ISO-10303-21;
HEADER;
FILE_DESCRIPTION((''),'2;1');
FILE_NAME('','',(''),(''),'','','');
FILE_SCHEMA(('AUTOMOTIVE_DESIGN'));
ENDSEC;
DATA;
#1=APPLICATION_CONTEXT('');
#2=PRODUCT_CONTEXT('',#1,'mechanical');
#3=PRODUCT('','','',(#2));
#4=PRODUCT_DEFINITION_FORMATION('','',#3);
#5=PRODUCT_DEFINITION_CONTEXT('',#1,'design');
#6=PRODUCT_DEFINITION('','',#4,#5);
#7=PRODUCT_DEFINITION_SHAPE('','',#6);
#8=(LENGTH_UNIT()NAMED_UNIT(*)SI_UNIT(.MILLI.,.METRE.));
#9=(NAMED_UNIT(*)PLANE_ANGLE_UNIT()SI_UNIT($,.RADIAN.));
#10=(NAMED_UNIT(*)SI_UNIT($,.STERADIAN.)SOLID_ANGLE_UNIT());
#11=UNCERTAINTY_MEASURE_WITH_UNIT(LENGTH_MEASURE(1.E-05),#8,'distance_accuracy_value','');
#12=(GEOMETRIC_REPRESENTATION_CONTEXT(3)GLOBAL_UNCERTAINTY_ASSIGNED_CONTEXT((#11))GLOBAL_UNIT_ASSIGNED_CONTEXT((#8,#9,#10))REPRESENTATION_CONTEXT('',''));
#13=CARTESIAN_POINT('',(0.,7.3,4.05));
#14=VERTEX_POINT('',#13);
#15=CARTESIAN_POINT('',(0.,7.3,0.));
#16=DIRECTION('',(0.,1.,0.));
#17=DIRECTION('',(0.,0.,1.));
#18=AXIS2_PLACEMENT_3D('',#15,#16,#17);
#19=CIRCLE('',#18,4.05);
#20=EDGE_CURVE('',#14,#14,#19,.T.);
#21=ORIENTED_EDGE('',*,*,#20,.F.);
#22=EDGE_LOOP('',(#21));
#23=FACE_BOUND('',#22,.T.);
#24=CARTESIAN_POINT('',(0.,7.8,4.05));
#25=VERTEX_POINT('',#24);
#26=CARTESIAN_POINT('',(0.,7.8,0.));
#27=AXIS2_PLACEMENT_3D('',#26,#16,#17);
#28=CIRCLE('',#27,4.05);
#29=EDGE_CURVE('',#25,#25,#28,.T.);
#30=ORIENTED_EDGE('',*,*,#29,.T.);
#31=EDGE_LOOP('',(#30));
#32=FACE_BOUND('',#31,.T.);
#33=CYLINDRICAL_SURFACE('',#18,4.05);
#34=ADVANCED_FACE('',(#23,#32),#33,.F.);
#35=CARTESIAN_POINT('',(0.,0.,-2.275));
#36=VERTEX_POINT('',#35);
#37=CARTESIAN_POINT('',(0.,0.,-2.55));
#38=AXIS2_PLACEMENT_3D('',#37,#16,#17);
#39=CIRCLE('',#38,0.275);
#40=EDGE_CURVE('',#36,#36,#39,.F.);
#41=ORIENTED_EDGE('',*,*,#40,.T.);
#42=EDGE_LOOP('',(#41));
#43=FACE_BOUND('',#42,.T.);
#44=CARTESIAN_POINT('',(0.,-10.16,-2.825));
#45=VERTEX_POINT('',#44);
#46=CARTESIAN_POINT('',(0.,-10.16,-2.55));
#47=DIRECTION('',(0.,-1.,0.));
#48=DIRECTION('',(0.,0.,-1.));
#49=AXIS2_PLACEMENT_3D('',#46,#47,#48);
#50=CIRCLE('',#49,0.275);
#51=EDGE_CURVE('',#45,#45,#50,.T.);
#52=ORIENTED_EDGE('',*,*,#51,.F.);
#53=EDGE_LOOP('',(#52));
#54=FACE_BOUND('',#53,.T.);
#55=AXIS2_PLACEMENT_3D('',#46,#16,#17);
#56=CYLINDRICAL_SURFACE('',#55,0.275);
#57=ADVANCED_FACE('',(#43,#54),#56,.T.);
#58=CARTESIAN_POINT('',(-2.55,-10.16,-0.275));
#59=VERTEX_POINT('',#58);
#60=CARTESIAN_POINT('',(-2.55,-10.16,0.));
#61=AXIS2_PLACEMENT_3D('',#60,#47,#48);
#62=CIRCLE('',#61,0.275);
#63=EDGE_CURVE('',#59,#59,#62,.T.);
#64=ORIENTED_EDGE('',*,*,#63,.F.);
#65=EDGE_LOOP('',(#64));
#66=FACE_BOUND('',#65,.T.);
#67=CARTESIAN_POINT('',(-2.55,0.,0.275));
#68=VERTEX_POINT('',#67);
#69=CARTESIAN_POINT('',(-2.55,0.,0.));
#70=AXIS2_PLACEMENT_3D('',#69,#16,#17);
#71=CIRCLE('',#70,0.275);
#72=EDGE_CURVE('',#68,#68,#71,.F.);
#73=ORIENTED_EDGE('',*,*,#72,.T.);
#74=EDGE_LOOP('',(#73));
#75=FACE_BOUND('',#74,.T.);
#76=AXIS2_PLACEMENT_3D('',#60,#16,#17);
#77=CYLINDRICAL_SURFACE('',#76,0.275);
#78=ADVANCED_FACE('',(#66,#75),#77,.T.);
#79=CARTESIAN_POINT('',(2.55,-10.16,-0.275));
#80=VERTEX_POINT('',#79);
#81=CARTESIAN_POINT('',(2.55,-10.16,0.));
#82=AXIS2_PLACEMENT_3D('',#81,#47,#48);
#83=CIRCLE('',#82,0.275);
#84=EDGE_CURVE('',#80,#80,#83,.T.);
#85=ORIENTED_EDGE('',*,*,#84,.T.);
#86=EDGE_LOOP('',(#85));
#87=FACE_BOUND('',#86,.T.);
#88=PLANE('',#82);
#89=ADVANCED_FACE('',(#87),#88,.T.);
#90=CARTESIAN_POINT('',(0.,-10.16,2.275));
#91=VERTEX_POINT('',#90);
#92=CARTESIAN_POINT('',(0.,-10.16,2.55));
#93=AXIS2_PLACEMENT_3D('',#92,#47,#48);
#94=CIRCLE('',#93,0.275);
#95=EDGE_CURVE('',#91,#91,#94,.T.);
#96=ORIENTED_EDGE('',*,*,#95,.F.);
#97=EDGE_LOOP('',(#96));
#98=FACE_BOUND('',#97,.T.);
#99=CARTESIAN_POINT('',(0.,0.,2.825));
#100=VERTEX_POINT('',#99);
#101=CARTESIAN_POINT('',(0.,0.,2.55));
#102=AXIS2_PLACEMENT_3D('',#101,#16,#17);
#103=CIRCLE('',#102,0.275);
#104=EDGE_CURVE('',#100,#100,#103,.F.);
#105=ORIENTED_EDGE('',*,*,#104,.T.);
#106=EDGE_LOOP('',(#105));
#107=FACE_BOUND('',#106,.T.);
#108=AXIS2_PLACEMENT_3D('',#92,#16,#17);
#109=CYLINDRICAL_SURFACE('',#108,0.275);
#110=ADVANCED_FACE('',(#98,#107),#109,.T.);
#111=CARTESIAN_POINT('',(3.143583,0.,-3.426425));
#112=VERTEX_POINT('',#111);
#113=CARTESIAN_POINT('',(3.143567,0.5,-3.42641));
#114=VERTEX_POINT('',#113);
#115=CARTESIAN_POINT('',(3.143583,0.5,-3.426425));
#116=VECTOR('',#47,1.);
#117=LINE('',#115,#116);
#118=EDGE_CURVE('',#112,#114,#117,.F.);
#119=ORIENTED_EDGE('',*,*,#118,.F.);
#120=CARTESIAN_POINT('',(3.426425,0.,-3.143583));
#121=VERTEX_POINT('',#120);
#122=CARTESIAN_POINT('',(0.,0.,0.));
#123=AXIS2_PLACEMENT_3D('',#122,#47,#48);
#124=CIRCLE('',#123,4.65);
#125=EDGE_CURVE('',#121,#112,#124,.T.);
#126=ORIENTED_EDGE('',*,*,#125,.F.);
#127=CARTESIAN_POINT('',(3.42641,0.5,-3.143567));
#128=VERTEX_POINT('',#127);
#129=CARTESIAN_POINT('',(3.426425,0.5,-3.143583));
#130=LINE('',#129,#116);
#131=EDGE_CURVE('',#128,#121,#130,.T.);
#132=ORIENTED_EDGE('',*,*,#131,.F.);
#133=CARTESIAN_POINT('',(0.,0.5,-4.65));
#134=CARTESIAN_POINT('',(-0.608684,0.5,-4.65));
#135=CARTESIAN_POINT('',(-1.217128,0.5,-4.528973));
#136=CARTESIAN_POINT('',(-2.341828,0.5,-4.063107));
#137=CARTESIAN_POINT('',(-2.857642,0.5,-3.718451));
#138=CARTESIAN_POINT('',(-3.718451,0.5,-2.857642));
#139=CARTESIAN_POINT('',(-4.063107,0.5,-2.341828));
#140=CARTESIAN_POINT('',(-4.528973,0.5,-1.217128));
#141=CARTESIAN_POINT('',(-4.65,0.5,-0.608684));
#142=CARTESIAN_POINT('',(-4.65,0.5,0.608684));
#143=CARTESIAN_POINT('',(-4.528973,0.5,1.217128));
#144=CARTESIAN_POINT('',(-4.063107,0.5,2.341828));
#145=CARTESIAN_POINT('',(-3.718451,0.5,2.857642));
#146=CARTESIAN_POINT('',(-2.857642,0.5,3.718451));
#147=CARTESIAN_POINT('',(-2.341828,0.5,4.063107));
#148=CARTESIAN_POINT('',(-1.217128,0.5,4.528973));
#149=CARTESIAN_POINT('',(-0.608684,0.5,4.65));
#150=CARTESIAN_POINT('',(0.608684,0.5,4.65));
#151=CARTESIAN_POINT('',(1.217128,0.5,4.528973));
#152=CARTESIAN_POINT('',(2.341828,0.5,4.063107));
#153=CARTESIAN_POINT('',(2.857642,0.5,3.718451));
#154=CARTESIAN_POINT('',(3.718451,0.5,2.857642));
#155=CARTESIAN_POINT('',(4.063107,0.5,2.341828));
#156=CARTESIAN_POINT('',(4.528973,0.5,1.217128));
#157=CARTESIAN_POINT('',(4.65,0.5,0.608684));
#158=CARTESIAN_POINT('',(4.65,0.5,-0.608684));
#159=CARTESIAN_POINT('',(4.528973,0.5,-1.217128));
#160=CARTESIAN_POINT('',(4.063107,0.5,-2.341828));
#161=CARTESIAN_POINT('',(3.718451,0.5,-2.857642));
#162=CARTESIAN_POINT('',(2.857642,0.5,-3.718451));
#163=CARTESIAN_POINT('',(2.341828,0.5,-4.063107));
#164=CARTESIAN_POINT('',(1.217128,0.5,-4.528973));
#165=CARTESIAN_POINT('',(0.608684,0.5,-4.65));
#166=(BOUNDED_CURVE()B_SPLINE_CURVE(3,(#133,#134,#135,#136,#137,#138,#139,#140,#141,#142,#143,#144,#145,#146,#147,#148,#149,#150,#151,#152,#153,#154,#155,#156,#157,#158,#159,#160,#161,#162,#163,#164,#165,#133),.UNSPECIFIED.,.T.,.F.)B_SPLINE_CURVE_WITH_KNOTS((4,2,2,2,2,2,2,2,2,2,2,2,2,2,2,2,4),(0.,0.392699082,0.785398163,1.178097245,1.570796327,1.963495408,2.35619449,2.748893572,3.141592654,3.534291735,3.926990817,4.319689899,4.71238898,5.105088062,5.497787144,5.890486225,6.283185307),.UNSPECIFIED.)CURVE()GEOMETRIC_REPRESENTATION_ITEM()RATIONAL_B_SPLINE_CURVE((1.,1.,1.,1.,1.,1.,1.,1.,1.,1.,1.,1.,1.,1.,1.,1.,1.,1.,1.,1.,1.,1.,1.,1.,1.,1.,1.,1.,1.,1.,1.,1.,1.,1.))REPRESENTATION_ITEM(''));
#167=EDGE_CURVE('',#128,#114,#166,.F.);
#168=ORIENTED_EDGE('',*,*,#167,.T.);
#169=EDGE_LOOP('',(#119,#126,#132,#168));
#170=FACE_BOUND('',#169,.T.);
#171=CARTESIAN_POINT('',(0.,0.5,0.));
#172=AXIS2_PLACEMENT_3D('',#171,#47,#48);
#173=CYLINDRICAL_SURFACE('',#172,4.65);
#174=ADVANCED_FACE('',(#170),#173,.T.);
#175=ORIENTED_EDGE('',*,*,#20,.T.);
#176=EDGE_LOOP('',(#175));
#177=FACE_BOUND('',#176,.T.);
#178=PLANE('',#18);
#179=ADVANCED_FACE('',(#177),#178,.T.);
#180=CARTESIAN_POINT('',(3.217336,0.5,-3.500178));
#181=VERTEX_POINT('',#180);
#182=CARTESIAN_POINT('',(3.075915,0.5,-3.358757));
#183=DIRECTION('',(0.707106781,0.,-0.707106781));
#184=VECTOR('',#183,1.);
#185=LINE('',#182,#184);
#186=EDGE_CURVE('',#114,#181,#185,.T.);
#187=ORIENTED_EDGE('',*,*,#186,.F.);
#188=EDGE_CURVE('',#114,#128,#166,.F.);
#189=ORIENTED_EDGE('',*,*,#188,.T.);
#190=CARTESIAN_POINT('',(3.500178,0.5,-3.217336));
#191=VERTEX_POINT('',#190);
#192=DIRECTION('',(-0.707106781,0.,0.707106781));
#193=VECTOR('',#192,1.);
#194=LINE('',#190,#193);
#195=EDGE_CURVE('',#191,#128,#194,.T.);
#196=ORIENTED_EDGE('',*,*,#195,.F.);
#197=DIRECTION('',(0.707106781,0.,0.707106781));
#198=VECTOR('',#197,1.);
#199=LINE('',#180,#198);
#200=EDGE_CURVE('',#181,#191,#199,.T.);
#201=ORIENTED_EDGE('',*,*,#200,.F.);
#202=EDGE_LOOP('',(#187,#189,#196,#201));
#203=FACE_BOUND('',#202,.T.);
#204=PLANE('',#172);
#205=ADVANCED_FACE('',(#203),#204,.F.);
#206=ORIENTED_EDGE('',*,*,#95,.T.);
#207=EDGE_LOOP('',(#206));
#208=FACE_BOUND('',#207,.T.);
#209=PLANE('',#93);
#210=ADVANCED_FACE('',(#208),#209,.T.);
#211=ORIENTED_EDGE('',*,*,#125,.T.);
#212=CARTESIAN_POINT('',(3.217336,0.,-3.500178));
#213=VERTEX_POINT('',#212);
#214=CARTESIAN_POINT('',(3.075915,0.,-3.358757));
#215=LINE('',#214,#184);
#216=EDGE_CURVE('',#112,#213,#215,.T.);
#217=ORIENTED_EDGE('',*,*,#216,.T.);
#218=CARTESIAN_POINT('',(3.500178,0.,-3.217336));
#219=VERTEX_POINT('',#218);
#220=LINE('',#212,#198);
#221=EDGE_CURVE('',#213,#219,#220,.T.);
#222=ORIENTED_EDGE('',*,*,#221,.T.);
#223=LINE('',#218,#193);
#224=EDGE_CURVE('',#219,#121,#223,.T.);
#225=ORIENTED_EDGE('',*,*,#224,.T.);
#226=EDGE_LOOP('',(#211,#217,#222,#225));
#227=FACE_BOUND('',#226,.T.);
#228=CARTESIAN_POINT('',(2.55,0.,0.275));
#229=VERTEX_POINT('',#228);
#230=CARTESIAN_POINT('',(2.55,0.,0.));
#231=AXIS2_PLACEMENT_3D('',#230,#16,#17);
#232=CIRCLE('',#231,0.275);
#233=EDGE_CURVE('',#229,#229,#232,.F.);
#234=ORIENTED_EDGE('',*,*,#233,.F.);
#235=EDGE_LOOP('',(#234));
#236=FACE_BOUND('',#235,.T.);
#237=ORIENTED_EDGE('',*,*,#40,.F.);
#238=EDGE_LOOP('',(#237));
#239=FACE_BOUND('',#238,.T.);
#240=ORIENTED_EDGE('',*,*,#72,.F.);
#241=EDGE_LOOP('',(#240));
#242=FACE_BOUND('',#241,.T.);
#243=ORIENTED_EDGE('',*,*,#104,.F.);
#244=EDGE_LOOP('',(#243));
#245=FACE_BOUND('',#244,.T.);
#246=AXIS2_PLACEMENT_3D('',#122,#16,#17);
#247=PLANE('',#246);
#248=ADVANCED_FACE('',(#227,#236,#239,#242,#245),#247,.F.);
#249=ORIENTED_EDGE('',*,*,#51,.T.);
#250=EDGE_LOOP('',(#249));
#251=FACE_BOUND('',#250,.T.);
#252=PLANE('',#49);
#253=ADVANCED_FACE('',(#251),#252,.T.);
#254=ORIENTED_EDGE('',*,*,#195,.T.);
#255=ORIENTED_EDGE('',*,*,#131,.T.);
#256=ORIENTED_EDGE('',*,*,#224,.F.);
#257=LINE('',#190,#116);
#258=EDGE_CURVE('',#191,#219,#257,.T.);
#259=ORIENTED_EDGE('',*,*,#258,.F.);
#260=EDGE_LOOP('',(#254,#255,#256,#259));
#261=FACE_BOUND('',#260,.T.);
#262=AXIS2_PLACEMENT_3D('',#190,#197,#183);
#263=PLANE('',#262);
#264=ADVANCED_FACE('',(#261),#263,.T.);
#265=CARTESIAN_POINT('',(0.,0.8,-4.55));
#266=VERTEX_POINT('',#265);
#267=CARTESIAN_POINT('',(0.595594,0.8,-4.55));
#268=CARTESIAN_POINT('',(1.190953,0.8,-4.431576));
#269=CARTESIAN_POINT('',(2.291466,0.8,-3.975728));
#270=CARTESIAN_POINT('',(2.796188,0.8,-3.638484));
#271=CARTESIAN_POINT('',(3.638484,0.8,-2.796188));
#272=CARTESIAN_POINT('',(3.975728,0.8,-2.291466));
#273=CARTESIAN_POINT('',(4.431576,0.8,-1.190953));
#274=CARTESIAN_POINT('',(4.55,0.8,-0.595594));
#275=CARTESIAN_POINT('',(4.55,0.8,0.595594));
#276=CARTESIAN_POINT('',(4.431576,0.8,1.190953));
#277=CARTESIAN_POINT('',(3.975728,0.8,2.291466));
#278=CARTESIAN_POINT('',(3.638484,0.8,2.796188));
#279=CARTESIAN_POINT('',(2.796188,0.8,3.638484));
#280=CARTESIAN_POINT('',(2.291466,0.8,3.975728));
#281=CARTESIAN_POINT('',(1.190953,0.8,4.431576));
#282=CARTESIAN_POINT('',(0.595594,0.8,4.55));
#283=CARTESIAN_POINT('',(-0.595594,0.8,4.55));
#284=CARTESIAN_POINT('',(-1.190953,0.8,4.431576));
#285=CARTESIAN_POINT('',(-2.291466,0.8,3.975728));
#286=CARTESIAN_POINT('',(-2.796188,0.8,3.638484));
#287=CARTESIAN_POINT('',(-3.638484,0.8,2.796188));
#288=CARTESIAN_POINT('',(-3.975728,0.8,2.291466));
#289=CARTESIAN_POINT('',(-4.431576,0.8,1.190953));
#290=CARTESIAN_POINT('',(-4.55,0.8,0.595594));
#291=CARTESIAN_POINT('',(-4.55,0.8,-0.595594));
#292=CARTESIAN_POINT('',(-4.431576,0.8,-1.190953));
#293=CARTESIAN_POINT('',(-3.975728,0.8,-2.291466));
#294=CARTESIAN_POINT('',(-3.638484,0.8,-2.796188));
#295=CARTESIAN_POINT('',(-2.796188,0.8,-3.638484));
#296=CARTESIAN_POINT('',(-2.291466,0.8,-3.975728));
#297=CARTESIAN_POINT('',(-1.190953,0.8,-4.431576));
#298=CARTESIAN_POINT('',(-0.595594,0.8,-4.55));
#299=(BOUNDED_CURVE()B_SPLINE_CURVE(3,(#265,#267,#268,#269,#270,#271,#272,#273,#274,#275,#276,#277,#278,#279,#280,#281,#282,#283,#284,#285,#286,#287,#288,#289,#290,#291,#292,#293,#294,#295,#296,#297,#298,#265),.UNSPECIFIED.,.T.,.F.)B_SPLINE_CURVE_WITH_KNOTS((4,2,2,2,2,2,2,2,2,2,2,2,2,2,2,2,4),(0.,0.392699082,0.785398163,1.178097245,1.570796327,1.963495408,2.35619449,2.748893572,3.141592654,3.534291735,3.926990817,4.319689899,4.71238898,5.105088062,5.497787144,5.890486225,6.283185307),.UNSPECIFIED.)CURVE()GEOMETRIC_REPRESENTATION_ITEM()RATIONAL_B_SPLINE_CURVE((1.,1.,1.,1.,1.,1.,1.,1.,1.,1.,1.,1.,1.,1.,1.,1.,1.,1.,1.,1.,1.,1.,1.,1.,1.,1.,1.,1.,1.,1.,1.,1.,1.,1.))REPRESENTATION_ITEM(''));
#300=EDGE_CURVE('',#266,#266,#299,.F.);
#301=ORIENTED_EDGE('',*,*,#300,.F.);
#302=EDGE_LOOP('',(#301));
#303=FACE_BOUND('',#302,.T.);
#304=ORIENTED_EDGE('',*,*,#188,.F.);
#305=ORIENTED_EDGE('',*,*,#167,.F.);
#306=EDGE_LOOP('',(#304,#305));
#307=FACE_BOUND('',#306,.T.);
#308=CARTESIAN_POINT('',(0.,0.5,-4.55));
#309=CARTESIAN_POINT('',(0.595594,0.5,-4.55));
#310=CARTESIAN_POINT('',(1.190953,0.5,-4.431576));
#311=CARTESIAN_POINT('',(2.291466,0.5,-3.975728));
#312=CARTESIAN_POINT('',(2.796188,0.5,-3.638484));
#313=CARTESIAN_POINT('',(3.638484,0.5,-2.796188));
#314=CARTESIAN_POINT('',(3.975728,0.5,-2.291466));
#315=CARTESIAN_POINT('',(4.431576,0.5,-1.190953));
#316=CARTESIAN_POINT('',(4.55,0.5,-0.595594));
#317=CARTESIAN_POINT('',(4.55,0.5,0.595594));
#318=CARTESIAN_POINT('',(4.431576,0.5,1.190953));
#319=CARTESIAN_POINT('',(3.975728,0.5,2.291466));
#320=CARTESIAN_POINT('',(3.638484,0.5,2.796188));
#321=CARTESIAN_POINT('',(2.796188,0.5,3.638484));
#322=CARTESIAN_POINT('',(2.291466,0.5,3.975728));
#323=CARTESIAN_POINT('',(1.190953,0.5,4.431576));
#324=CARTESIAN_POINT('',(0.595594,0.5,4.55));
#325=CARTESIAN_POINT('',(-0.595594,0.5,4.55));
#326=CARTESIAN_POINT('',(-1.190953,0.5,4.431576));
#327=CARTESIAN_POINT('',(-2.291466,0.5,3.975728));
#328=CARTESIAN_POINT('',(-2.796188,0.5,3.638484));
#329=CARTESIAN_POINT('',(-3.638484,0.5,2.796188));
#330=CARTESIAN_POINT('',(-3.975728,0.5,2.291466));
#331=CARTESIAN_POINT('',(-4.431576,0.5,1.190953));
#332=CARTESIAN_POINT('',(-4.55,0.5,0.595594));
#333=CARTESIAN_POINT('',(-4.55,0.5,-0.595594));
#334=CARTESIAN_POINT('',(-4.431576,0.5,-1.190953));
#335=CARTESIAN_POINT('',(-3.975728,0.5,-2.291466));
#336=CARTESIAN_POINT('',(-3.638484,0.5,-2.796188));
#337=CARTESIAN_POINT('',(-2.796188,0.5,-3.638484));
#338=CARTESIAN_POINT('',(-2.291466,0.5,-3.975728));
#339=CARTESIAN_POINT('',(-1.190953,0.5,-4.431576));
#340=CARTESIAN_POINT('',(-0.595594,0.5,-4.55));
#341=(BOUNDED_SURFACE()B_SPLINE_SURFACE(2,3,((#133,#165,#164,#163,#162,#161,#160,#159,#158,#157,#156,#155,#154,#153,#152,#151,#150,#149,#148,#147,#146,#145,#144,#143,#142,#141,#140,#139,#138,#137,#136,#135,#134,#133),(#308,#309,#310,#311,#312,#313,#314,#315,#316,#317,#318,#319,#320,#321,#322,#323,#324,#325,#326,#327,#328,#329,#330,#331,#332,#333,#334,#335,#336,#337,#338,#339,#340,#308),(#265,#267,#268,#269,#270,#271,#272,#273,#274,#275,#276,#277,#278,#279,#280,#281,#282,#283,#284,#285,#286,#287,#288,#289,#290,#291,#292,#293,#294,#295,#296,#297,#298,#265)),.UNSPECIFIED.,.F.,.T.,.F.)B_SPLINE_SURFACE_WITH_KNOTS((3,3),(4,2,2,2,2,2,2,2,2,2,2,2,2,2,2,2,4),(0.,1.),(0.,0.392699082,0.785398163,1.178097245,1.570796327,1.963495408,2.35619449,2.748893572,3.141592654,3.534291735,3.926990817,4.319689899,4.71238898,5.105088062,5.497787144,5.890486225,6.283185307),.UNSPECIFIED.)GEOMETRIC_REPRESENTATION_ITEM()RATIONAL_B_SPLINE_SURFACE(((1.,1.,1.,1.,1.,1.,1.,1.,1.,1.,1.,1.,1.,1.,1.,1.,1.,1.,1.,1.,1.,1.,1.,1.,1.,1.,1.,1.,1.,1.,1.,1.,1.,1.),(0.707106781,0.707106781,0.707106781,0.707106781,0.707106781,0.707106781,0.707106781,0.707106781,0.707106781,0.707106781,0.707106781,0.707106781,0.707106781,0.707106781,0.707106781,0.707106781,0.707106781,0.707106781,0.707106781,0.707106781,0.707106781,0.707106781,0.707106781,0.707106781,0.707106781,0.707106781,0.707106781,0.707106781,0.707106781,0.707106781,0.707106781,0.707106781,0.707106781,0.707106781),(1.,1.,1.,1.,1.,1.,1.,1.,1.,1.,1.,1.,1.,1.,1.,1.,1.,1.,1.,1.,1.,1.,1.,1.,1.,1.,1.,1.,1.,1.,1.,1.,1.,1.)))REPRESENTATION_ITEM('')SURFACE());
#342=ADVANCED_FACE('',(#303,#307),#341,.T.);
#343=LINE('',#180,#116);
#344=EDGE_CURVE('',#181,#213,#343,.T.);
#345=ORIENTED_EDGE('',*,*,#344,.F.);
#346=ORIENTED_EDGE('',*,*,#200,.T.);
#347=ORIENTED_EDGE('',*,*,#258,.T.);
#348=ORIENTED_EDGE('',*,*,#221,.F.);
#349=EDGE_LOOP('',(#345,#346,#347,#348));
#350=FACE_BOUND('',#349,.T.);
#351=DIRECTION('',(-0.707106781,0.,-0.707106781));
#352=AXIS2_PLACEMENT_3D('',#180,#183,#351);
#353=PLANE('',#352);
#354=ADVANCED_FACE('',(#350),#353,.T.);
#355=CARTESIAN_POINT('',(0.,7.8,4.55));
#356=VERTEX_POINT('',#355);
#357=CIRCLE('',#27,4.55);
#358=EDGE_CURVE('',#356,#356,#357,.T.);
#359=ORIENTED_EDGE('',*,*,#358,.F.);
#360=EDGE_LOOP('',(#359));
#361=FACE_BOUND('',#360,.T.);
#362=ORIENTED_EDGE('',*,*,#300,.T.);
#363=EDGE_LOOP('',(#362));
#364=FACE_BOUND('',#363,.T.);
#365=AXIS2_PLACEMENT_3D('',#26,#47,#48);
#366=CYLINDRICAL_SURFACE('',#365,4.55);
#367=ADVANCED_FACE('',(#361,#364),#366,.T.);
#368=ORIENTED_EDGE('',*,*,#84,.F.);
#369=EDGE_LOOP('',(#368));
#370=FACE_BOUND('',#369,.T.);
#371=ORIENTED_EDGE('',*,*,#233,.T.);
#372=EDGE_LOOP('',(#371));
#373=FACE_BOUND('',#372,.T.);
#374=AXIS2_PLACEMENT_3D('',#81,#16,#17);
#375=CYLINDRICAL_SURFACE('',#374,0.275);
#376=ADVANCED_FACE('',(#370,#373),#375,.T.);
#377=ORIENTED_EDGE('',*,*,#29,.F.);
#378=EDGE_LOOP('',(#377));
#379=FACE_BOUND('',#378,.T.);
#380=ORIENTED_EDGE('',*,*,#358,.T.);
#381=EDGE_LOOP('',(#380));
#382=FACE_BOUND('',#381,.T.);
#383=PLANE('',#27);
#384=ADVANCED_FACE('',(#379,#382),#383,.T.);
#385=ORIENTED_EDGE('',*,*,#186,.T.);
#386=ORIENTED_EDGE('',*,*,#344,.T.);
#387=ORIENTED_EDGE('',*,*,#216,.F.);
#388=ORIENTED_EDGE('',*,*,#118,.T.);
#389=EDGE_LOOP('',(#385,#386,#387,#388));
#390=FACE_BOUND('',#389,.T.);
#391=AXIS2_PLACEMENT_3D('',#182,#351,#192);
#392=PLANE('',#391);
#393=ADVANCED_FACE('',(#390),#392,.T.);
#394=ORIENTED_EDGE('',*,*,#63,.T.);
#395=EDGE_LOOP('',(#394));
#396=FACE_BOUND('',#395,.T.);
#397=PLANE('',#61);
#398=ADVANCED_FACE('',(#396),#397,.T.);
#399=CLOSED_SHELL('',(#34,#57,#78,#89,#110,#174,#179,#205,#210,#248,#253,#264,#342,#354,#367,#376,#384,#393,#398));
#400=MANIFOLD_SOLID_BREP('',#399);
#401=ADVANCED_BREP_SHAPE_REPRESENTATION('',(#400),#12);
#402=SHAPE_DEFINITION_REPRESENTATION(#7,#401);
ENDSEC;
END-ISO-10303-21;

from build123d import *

# Parameters (mm, degrees)
SKETCH1_R           = 4.55
BOSS_EXTRUDE1_DEPTH = 7.8
SKETCH2_R           = 4.050000028
CUT_EXTRUDE1_DEPTH  = 0.5
SKETCH3_R           = 0.275
BOSS_EXTRUDE2_DEPTH = 10.16
SKETCH4_R           = 4.65
BOSS_EXTRUDE3_DEPTH = 0.5
FILLET1_SIZE        = 0.1
FILLET1_SIZE_2      = 0.3
BOSS_EXTRUDE4_DEPTH = 0.5


with BuildPart() as part:
    # Sketch1 → Boss-Extrude1 (new body)
    with BuildSketch(Plane(origin=(0, 0, 0), x_dir=(1, 0, 0), z_dir=(0, 1, 0))):
        with Locations(Location((0, 0, 0), (0, 0, 270))):
            Circle(SKETCH1_R)
    extrude(amount=BOSS_EXTRUDE1_DEPTH)

    # Sketch2 → Cut-Extrude1 (cut)
    with BuildSketch(Plane(origin=(0, 7.8, 0), x_dir=(1, 0, 0), z_dir=(0, 1, 0))):
        with Locations(Location((0, 0, 0), (0, 0, 270))):
            Circle(SKETCH2_R)
    extrude(amount=-CUT_EXTRUDE1_DEPTH, mode=Mode.SUBTRACT)

    # Sketch3 → Boss-Extrude2 (add)
    with BuildSketch(Plane(origin=(0, 0, 0), x_dir=(-1, 0, 0), z_dir=(0, -1, 0))):
        with Locations(Location((0, 2.55, 0), (0, 0, 270))):
            Circle(SKETCH3_R)
        with Locations(Location((2.55, 0, 0), (0, 0, 270))):
            Circle(SKETCH3_R)
        with Locations(Location((0, -2.55, 0), (0, 0, 270))):
            Circle(SKETCH3_R)
        with Locations(Location((-2.55, 0, 0), (0, 0, 270))):
            Circle(SKETCH3_R)
    extrude(amount=BOSS_EXTRUDE2_DEPTH)

    # Sketch4 → Boss-Extrude3 (add)
    with BuildSketch(Plane(origin=(0, 0, 0), x_dir=(-1, 0, 0), z_dir=(0, -1, 0))):
        with Locations(Location((0, 0, 0), (0, 0, 90))):
            Circle(SKETCH4_R)
    extrude(amount=-BOSS_EXTRUDE3_DEPTH)

    # Fillet1
    # an asymmetric fillet: 0.3, 0.1 mm, written as the material it adds along each edge
    with BuildSketch(Plane(origin=(0, 0.5, 0), x_dir=(0, 0, 1), z_dir=(1, 0, 0))) as fillet1_piece_1_section:
        with BuildLine():
            Bezier((4.55 + FILLET1_SIZE, 0), (4.55, 0), (4.55, -FILLET1_SIZE_2), weights=[1, 0.707106781, 1])
            Line((4.55, -FILLET1_SIZE_2), (4.55, 0))
            Line((4.55, 0), (4.55 + FILLET1_SIZE, 0))
        make_face()
    fillet1_piece_1 = revolve(axis=Axis((0, 0.5, 0), (0, -1, 0)), mode=Mode.PRIVATE)
    fillet1_piece_1 = fillet1_piece_1 & Plane(origin=(0, 0.585863309, 0), x_dir=(0, 0, -1), z_dir=(0, -1, 0)) * Cylinder(4.65, 19, mode=Mode.PRIVATE)
    add(fillet1_piece_1)

    # Sketch5 → Boss-Extrude4 (add)
    with BuildSketch(Plane(origin=(0, 0, 0), x_dir=(-1, 0, 0), z_dir=(0, -1, 0))):
        Polygon((-3.075914781, 3.358756928), (-3.217336137, 3.500178284), (-3.500178284, 3.217336137), (-3.358756928, 3.075914781), align=None)
    extrude(amount=-BOSS_EXTRUDE4_DEPTH)


solid = part.part
